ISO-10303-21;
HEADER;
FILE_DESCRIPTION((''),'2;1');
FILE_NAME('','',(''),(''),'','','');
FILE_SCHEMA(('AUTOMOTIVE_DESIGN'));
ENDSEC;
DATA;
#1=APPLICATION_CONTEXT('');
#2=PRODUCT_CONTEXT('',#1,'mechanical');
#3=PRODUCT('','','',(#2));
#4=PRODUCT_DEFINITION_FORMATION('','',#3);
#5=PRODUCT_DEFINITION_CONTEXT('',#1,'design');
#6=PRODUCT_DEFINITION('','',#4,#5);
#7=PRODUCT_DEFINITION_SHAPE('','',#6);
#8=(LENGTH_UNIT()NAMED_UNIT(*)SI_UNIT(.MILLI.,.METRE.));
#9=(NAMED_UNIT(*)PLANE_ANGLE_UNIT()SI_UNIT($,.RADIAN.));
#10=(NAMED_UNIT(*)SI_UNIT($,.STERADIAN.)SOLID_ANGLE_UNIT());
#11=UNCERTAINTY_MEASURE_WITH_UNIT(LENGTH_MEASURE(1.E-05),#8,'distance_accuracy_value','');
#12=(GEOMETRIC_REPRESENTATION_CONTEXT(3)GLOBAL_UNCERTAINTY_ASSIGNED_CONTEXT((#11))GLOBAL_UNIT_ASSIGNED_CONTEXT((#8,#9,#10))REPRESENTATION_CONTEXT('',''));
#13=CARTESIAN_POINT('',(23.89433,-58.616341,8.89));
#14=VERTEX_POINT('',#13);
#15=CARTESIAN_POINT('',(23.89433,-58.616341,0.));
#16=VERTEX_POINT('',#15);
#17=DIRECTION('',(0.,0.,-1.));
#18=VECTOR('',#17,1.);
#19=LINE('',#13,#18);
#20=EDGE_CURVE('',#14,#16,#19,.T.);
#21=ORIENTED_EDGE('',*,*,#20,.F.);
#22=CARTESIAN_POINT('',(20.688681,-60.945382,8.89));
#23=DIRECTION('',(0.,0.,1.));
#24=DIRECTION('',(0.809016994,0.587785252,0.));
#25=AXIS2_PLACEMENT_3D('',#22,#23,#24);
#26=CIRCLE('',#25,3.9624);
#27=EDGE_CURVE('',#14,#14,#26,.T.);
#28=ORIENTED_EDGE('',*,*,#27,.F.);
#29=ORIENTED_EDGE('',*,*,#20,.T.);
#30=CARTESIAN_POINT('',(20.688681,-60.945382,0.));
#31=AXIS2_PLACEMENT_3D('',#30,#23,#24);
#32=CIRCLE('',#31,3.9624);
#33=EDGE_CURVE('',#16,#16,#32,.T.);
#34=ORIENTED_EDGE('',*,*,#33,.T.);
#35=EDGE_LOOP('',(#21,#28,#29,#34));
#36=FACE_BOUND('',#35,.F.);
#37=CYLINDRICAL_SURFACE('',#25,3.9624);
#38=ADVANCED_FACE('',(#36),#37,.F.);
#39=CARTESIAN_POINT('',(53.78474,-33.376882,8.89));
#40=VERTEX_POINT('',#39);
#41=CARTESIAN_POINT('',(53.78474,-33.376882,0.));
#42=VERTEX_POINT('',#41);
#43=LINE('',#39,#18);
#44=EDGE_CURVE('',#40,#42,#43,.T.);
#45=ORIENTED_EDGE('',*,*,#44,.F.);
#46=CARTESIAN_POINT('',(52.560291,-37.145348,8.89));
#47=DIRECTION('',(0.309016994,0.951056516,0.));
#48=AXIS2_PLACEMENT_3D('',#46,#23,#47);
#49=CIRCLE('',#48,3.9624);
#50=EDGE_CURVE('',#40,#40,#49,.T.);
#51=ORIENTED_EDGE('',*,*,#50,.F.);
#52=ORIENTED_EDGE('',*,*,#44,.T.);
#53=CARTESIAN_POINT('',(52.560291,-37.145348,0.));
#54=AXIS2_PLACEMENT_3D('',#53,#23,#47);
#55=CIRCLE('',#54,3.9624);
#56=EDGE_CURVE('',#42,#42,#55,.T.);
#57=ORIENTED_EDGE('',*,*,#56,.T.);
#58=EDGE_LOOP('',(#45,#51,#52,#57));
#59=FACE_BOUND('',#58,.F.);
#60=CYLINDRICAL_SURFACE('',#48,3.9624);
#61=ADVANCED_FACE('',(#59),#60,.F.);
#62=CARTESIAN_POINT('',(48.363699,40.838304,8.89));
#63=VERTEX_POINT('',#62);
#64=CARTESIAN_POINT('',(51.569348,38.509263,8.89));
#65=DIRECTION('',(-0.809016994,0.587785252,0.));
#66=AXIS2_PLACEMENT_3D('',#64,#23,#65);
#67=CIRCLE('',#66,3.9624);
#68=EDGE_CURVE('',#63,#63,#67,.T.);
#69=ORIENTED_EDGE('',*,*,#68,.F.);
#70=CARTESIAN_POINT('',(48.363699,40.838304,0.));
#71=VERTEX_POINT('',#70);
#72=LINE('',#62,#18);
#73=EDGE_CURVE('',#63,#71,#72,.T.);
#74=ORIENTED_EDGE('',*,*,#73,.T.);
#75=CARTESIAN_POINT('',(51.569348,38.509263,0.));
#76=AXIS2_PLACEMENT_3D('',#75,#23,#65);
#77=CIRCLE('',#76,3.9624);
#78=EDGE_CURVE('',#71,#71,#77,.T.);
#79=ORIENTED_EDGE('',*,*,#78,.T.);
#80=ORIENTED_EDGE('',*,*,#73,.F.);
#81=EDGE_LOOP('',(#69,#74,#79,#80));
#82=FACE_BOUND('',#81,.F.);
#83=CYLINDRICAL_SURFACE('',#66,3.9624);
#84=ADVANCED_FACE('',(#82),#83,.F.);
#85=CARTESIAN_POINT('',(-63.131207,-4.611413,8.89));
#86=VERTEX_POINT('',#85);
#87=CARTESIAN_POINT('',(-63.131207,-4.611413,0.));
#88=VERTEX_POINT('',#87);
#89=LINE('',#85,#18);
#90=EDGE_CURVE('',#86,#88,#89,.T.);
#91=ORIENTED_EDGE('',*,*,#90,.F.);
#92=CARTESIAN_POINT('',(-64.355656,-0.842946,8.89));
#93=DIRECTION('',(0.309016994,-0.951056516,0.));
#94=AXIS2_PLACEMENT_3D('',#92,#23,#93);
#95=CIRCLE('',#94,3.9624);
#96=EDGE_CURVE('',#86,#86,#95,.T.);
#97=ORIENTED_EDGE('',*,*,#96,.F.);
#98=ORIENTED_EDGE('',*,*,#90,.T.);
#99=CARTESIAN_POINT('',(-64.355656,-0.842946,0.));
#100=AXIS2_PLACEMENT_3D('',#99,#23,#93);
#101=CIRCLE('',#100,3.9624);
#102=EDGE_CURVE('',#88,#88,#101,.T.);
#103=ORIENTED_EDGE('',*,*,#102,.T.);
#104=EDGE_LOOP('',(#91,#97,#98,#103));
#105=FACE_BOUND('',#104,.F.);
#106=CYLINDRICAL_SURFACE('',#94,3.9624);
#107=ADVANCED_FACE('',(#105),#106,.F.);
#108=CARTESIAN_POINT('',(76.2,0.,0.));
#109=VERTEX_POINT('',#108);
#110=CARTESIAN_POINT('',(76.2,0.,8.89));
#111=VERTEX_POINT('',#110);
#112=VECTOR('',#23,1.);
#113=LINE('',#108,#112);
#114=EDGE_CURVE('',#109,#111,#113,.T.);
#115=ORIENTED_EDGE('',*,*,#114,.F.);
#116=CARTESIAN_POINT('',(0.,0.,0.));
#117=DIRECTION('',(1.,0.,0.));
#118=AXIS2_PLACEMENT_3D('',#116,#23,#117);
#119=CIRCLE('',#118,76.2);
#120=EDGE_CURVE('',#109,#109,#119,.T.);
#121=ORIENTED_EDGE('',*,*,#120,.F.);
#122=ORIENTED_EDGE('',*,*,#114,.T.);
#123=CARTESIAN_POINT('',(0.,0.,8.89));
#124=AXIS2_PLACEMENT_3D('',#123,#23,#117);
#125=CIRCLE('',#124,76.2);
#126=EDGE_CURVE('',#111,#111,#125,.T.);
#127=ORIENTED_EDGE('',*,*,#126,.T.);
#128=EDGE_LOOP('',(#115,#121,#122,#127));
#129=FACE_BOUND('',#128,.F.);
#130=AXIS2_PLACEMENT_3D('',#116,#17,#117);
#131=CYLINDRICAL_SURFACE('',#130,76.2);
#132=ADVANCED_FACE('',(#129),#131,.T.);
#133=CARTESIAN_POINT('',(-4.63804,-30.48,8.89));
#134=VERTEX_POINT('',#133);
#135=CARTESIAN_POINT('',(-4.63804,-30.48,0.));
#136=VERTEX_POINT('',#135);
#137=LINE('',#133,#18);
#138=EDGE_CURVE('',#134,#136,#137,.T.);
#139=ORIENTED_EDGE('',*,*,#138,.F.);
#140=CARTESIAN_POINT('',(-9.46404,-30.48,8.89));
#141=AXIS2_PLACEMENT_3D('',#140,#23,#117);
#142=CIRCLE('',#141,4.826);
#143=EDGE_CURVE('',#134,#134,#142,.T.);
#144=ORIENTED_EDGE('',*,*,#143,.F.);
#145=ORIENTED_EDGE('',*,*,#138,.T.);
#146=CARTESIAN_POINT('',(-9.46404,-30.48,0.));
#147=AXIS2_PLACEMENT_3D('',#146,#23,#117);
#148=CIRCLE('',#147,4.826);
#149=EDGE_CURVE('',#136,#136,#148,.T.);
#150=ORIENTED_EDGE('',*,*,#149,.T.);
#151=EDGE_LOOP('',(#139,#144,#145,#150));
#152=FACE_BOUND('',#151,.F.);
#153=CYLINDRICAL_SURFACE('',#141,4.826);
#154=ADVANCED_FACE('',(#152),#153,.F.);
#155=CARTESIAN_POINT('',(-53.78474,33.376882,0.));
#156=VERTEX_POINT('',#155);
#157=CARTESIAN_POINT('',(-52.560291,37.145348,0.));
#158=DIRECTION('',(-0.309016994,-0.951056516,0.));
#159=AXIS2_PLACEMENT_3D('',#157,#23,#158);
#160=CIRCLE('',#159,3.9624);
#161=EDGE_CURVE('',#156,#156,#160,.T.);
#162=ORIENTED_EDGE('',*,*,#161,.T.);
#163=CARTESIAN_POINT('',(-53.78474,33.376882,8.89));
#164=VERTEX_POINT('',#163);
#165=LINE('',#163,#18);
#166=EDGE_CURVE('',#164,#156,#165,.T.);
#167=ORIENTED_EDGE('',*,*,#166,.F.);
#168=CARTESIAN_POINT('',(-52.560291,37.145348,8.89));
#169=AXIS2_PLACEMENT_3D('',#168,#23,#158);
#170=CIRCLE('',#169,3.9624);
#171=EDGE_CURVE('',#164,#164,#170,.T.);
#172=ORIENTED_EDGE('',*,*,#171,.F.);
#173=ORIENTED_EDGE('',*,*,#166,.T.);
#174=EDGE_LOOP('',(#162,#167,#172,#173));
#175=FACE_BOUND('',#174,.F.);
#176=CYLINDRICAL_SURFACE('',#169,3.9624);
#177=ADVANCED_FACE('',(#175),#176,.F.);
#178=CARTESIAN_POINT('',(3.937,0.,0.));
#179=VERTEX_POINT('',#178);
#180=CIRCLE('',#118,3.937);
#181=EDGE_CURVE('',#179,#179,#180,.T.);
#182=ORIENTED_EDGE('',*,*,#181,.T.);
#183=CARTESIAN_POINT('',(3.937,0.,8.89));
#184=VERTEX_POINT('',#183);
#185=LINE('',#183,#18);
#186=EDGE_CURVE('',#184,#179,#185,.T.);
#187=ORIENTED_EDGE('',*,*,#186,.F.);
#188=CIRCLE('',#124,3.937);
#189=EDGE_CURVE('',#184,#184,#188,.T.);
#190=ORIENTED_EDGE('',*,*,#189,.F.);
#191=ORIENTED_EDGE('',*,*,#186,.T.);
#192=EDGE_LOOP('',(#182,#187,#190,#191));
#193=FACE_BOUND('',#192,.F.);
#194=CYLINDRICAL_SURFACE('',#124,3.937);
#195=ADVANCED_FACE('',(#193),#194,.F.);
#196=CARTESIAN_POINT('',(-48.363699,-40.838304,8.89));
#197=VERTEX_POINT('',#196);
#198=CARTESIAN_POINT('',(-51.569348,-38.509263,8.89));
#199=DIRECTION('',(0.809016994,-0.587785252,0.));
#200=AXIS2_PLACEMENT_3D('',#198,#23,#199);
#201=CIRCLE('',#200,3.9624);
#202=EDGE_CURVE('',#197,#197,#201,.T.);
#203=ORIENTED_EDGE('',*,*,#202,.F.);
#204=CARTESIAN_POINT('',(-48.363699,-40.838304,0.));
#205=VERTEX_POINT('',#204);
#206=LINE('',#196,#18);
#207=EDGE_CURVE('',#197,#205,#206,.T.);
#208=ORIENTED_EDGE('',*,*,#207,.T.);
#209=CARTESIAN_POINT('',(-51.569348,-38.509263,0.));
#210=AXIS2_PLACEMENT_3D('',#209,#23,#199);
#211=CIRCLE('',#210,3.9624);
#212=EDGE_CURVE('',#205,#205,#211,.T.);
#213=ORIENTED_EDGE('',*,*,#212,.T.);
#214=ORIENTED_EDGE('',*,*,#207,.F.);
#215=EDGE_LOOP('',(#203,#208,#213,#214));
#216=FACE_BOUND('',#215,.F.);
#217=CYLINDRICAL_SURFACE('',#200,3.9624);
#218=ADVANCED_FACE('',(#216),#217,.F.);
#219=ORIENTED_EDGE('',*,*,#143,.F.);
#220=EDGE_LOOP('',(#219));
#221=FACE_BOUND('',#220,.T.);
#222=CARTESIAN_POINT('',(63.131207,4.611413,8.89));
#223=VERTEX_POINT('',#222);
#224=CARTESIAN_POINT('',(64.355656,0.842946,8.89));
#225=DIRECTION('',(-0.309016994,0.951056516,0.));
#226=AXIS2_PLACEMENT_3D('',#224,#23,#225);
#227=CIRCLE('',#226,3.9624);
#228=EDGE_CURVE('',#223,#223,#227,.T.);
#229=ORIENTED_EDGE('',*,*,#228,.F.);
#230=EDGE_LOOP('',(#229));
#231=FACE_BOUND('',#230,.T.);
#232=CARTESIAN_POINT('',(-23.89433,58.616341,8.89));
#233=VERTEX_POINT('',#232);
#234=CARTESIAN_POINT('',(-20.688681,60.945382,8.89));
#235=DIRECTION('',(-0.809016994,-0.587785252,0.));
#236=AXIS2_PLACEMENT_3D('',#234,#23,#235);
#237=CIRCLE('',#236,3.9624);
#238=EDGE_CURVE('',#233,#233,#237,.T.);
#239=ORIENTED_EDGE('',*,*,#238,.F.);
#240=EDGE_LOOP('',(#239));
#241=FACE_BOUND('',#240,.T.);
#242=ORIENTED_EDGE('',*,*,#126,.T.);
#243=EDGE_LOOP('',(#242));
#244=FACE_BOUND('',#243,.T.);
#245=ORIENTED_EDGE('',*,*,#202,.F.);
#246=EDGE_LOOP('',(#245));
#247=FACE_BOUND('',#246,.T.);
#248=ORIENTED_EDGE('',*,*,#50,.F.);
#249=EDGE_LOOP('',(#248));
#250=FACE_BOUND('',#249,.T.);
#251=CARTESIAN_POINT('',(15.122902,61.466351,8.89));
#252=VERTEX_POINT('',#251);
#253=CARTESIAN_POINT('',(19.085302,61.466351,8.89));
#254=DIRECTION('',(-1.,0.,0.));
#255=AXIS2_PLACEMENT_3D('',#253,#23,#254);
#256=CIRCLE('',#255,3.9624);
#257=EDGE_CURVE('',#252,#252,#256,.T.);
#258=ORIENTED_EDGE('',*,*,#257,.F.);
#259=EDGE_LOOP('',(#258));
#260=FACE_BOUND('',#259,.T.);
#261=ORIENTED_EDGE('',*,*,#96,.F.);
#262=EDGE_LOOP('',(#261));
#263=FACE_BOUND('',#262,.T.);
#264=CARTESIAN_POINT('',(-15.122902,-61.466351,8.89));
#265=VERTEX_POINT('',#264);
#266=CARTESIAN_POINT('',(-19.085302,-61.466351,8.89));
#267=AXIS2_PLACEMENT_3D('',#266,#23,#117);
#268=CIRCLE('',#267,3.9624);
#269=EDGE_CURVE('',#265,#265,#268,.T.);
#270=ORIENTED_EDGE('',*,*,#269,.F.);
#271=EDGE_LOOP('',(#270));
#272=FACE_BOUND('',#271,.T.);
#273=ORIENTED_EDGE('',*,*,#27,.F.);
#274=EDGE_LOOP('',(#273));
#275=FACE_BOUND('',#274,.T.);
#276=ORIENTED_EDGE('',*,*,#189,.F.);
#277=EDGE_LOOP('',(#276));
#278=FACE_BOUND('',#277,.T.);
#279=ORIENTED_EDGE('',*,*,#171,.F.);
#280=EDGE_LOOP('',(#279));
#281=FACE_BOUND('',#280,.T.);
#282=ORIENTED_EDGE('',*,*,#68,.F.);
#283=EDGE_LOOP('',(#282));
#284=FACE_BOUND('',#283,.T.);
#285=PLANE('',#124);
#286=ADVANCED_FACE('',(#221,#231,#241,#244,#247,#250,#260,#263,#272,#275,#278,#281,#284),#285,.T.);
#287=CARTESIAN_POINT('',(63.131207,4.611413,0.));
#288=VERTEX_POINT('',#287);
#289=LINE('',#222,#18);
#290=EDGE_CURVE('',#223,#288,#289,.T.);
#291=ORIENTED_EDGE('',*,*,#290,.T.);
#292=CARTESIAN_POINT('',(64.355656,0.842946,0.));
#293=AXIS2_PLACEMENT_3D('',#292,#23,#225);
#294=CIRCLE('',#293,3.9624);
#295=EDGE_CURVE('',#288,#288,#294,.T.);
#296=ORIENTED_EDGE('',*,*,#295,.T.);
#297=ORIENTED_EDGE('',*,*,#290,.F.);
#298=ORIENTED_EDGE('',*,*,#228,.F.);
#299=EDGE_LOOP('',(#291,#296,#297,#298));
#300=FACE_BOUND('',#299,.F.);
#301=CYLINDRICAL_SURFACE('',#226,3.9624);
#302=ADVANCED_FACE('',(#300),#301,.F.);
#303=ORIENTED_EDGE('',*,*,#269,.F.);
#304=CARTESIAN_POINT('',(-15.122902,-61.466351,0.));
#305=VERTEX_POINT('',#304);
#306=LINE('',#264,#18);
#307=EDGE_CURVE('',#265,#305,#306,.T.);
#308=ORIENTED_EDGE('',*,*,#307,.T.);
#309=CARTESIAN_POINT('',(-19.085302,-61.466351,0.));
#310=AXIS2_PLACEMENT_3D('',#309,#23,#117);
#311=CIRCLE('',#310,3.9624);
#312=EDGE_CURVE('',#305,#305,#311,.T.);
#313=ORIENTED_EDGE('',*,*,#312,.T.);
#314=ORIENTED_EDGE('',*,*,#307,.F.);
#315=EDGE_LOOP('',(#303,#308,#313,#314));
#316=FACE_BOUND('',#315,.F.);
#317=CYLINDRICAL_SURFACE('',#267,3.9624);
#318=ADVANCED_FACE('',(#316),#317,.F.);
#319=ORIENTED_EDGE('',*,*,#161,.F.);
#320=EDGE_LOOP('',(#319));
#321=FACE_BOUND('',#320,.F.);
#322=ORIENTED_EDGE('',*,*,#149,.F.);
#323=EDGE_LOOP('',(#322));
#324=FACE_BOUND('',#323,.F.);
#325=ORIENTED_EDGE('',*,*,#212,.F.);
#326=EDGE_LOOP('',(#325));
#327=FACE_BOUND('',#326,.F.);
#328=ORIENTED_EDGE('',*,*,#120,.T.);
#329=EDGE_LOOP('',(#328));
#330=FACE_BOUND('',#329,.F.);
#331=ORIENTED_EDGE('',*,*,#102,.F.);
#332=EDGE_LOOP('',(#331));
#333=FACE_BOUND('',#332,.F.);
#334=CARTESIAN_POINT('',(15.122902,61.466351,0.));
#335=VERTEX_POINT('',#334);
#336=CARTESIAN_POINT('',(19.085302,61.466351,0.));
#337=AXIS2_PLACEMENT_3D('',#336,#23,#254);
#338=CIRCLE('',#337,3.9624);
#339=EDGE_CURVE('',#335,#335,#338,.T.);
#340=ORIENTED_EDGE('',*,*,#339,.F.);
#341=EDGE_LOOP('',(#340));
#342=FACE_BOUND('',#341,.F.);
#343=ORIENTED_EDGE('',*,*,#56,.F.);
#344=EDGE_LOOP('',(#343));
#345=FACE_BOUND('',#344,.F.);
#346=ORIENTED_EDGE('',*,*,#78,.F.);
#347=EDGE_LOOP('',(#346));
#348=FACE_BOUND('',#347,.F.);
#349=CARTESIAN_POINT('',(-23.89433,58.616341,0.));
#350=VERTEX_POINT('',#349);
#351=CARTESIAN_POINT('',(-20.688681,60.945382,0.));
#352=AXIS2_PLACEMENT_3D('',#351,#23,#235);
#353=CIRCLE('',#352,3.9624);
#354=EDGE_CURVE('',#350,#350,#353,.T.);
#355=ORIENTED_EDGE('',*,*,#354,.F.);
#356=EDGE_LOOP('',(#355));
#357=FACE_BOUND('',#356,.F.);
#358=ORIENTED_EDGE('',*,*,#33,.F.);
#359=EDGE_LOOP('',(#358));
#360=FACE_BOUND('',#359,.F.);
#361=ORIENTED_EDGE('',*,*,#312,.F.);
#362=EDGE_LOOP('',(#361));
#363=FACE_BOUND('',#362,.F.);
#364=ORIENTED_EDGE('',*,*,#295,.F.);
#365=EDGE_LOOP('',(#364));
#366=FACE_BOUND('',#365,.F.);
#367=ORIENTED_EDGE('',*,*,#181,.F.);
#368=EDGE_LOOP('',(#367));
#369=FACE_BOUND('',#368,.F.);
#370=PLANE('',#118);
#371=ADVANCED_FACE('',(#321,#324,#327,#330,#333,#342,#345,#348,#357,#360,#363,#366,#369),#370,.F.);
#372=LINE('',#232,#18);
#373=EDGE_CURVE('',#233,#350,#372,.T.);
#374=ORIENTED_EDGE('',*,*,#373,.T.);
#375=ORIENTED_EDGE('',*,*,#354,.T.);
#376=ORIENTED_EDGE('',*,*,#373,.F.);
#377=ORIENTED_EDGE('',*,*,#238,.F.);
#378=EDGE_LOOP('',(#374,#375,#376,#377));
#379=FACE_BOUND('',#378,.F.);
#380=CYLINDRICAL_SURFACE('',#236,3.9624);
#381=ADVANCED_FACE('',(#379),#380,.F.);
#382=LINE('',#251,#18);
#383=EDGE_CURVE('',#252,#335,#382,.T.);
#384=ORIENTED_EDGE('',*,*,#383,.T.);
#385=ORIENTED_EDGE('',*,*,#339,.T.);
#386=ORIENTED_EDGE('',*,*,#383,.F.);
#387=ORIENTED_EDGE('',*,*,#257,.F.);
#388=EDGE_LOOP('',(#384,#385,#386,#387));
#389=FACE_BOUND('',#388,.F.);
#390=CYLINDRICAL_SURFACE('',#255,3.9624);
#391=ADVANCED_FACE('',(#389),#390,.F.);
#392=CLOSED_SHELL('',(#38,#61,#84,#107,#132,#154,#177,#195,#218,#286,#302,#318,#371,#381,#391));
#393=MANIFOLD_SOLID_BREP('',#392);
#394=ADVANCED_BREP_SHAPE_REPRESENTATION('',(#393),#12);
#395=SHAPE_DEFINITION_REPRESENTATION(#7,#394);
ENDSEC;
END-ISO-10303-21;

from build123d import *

# Parameters (mm, degrees)
F0_R            = 76.2
F1_DEPTH        = 8.89
F2_R            = 3.937
F3_DEPTH        = 25.4
F4_R            = 4.826
F5_DEPTH        = 25.4
F6_R            = 3.9624
F7_DEPTH        = 25.4
F7_COPIES_COUNT = 10


# Not quite as in the source:
# - a pattern or mirror of a feature is missing from the dataset's text; its kind, count and spacing are read off the source's solid


with BuildPart() as f1:
    # F0 (on Top) → F1 (new body)
    with BuildSketch(Plane.XY):
        Circle(F0_R)
    extrude(amount=F1_DEPTH)

    # F2 (on face) → F3 (cut)
    with BuildSketch(Plane.XY.offset(8.89)):
        Circle(F2_R)
    extrude(amount=-F3_DEPTH, mode=Mode.SUBTRACT)

    # F4 (on face) → F5 (cut)
    with BuildSketch(Plane.XY.offset(8.89)):
        with Locations((-9.46404, -30.48)):
            Circle(F4_R)
    extrude(amount=-F5_DEPTH, mode=Mode.SUBTRACT)

    # F6 (on face) → F7 (cut)
    with BuildSketch(Plane.XY.offset(8.89)):
        with Locations((-19.085301976, -61.4663509693)):
            Circle(F6_R)
    f7 = extrude(amount=-F7_DEPTH, mode=Mode.SUBTRACT)

    # F7_copies: F7 ×10 about axis
    f7_copies_axis = Axis((0, 0, 0), (0, 0, 1))
    for i in range(1, F7_COPIES_COUNT):
        add(f7.rotate(f7_copies_axis, i * 360 / F7_COPIES_COUNT), mode=Mode.SUBTRACT)


solid = f1.part
